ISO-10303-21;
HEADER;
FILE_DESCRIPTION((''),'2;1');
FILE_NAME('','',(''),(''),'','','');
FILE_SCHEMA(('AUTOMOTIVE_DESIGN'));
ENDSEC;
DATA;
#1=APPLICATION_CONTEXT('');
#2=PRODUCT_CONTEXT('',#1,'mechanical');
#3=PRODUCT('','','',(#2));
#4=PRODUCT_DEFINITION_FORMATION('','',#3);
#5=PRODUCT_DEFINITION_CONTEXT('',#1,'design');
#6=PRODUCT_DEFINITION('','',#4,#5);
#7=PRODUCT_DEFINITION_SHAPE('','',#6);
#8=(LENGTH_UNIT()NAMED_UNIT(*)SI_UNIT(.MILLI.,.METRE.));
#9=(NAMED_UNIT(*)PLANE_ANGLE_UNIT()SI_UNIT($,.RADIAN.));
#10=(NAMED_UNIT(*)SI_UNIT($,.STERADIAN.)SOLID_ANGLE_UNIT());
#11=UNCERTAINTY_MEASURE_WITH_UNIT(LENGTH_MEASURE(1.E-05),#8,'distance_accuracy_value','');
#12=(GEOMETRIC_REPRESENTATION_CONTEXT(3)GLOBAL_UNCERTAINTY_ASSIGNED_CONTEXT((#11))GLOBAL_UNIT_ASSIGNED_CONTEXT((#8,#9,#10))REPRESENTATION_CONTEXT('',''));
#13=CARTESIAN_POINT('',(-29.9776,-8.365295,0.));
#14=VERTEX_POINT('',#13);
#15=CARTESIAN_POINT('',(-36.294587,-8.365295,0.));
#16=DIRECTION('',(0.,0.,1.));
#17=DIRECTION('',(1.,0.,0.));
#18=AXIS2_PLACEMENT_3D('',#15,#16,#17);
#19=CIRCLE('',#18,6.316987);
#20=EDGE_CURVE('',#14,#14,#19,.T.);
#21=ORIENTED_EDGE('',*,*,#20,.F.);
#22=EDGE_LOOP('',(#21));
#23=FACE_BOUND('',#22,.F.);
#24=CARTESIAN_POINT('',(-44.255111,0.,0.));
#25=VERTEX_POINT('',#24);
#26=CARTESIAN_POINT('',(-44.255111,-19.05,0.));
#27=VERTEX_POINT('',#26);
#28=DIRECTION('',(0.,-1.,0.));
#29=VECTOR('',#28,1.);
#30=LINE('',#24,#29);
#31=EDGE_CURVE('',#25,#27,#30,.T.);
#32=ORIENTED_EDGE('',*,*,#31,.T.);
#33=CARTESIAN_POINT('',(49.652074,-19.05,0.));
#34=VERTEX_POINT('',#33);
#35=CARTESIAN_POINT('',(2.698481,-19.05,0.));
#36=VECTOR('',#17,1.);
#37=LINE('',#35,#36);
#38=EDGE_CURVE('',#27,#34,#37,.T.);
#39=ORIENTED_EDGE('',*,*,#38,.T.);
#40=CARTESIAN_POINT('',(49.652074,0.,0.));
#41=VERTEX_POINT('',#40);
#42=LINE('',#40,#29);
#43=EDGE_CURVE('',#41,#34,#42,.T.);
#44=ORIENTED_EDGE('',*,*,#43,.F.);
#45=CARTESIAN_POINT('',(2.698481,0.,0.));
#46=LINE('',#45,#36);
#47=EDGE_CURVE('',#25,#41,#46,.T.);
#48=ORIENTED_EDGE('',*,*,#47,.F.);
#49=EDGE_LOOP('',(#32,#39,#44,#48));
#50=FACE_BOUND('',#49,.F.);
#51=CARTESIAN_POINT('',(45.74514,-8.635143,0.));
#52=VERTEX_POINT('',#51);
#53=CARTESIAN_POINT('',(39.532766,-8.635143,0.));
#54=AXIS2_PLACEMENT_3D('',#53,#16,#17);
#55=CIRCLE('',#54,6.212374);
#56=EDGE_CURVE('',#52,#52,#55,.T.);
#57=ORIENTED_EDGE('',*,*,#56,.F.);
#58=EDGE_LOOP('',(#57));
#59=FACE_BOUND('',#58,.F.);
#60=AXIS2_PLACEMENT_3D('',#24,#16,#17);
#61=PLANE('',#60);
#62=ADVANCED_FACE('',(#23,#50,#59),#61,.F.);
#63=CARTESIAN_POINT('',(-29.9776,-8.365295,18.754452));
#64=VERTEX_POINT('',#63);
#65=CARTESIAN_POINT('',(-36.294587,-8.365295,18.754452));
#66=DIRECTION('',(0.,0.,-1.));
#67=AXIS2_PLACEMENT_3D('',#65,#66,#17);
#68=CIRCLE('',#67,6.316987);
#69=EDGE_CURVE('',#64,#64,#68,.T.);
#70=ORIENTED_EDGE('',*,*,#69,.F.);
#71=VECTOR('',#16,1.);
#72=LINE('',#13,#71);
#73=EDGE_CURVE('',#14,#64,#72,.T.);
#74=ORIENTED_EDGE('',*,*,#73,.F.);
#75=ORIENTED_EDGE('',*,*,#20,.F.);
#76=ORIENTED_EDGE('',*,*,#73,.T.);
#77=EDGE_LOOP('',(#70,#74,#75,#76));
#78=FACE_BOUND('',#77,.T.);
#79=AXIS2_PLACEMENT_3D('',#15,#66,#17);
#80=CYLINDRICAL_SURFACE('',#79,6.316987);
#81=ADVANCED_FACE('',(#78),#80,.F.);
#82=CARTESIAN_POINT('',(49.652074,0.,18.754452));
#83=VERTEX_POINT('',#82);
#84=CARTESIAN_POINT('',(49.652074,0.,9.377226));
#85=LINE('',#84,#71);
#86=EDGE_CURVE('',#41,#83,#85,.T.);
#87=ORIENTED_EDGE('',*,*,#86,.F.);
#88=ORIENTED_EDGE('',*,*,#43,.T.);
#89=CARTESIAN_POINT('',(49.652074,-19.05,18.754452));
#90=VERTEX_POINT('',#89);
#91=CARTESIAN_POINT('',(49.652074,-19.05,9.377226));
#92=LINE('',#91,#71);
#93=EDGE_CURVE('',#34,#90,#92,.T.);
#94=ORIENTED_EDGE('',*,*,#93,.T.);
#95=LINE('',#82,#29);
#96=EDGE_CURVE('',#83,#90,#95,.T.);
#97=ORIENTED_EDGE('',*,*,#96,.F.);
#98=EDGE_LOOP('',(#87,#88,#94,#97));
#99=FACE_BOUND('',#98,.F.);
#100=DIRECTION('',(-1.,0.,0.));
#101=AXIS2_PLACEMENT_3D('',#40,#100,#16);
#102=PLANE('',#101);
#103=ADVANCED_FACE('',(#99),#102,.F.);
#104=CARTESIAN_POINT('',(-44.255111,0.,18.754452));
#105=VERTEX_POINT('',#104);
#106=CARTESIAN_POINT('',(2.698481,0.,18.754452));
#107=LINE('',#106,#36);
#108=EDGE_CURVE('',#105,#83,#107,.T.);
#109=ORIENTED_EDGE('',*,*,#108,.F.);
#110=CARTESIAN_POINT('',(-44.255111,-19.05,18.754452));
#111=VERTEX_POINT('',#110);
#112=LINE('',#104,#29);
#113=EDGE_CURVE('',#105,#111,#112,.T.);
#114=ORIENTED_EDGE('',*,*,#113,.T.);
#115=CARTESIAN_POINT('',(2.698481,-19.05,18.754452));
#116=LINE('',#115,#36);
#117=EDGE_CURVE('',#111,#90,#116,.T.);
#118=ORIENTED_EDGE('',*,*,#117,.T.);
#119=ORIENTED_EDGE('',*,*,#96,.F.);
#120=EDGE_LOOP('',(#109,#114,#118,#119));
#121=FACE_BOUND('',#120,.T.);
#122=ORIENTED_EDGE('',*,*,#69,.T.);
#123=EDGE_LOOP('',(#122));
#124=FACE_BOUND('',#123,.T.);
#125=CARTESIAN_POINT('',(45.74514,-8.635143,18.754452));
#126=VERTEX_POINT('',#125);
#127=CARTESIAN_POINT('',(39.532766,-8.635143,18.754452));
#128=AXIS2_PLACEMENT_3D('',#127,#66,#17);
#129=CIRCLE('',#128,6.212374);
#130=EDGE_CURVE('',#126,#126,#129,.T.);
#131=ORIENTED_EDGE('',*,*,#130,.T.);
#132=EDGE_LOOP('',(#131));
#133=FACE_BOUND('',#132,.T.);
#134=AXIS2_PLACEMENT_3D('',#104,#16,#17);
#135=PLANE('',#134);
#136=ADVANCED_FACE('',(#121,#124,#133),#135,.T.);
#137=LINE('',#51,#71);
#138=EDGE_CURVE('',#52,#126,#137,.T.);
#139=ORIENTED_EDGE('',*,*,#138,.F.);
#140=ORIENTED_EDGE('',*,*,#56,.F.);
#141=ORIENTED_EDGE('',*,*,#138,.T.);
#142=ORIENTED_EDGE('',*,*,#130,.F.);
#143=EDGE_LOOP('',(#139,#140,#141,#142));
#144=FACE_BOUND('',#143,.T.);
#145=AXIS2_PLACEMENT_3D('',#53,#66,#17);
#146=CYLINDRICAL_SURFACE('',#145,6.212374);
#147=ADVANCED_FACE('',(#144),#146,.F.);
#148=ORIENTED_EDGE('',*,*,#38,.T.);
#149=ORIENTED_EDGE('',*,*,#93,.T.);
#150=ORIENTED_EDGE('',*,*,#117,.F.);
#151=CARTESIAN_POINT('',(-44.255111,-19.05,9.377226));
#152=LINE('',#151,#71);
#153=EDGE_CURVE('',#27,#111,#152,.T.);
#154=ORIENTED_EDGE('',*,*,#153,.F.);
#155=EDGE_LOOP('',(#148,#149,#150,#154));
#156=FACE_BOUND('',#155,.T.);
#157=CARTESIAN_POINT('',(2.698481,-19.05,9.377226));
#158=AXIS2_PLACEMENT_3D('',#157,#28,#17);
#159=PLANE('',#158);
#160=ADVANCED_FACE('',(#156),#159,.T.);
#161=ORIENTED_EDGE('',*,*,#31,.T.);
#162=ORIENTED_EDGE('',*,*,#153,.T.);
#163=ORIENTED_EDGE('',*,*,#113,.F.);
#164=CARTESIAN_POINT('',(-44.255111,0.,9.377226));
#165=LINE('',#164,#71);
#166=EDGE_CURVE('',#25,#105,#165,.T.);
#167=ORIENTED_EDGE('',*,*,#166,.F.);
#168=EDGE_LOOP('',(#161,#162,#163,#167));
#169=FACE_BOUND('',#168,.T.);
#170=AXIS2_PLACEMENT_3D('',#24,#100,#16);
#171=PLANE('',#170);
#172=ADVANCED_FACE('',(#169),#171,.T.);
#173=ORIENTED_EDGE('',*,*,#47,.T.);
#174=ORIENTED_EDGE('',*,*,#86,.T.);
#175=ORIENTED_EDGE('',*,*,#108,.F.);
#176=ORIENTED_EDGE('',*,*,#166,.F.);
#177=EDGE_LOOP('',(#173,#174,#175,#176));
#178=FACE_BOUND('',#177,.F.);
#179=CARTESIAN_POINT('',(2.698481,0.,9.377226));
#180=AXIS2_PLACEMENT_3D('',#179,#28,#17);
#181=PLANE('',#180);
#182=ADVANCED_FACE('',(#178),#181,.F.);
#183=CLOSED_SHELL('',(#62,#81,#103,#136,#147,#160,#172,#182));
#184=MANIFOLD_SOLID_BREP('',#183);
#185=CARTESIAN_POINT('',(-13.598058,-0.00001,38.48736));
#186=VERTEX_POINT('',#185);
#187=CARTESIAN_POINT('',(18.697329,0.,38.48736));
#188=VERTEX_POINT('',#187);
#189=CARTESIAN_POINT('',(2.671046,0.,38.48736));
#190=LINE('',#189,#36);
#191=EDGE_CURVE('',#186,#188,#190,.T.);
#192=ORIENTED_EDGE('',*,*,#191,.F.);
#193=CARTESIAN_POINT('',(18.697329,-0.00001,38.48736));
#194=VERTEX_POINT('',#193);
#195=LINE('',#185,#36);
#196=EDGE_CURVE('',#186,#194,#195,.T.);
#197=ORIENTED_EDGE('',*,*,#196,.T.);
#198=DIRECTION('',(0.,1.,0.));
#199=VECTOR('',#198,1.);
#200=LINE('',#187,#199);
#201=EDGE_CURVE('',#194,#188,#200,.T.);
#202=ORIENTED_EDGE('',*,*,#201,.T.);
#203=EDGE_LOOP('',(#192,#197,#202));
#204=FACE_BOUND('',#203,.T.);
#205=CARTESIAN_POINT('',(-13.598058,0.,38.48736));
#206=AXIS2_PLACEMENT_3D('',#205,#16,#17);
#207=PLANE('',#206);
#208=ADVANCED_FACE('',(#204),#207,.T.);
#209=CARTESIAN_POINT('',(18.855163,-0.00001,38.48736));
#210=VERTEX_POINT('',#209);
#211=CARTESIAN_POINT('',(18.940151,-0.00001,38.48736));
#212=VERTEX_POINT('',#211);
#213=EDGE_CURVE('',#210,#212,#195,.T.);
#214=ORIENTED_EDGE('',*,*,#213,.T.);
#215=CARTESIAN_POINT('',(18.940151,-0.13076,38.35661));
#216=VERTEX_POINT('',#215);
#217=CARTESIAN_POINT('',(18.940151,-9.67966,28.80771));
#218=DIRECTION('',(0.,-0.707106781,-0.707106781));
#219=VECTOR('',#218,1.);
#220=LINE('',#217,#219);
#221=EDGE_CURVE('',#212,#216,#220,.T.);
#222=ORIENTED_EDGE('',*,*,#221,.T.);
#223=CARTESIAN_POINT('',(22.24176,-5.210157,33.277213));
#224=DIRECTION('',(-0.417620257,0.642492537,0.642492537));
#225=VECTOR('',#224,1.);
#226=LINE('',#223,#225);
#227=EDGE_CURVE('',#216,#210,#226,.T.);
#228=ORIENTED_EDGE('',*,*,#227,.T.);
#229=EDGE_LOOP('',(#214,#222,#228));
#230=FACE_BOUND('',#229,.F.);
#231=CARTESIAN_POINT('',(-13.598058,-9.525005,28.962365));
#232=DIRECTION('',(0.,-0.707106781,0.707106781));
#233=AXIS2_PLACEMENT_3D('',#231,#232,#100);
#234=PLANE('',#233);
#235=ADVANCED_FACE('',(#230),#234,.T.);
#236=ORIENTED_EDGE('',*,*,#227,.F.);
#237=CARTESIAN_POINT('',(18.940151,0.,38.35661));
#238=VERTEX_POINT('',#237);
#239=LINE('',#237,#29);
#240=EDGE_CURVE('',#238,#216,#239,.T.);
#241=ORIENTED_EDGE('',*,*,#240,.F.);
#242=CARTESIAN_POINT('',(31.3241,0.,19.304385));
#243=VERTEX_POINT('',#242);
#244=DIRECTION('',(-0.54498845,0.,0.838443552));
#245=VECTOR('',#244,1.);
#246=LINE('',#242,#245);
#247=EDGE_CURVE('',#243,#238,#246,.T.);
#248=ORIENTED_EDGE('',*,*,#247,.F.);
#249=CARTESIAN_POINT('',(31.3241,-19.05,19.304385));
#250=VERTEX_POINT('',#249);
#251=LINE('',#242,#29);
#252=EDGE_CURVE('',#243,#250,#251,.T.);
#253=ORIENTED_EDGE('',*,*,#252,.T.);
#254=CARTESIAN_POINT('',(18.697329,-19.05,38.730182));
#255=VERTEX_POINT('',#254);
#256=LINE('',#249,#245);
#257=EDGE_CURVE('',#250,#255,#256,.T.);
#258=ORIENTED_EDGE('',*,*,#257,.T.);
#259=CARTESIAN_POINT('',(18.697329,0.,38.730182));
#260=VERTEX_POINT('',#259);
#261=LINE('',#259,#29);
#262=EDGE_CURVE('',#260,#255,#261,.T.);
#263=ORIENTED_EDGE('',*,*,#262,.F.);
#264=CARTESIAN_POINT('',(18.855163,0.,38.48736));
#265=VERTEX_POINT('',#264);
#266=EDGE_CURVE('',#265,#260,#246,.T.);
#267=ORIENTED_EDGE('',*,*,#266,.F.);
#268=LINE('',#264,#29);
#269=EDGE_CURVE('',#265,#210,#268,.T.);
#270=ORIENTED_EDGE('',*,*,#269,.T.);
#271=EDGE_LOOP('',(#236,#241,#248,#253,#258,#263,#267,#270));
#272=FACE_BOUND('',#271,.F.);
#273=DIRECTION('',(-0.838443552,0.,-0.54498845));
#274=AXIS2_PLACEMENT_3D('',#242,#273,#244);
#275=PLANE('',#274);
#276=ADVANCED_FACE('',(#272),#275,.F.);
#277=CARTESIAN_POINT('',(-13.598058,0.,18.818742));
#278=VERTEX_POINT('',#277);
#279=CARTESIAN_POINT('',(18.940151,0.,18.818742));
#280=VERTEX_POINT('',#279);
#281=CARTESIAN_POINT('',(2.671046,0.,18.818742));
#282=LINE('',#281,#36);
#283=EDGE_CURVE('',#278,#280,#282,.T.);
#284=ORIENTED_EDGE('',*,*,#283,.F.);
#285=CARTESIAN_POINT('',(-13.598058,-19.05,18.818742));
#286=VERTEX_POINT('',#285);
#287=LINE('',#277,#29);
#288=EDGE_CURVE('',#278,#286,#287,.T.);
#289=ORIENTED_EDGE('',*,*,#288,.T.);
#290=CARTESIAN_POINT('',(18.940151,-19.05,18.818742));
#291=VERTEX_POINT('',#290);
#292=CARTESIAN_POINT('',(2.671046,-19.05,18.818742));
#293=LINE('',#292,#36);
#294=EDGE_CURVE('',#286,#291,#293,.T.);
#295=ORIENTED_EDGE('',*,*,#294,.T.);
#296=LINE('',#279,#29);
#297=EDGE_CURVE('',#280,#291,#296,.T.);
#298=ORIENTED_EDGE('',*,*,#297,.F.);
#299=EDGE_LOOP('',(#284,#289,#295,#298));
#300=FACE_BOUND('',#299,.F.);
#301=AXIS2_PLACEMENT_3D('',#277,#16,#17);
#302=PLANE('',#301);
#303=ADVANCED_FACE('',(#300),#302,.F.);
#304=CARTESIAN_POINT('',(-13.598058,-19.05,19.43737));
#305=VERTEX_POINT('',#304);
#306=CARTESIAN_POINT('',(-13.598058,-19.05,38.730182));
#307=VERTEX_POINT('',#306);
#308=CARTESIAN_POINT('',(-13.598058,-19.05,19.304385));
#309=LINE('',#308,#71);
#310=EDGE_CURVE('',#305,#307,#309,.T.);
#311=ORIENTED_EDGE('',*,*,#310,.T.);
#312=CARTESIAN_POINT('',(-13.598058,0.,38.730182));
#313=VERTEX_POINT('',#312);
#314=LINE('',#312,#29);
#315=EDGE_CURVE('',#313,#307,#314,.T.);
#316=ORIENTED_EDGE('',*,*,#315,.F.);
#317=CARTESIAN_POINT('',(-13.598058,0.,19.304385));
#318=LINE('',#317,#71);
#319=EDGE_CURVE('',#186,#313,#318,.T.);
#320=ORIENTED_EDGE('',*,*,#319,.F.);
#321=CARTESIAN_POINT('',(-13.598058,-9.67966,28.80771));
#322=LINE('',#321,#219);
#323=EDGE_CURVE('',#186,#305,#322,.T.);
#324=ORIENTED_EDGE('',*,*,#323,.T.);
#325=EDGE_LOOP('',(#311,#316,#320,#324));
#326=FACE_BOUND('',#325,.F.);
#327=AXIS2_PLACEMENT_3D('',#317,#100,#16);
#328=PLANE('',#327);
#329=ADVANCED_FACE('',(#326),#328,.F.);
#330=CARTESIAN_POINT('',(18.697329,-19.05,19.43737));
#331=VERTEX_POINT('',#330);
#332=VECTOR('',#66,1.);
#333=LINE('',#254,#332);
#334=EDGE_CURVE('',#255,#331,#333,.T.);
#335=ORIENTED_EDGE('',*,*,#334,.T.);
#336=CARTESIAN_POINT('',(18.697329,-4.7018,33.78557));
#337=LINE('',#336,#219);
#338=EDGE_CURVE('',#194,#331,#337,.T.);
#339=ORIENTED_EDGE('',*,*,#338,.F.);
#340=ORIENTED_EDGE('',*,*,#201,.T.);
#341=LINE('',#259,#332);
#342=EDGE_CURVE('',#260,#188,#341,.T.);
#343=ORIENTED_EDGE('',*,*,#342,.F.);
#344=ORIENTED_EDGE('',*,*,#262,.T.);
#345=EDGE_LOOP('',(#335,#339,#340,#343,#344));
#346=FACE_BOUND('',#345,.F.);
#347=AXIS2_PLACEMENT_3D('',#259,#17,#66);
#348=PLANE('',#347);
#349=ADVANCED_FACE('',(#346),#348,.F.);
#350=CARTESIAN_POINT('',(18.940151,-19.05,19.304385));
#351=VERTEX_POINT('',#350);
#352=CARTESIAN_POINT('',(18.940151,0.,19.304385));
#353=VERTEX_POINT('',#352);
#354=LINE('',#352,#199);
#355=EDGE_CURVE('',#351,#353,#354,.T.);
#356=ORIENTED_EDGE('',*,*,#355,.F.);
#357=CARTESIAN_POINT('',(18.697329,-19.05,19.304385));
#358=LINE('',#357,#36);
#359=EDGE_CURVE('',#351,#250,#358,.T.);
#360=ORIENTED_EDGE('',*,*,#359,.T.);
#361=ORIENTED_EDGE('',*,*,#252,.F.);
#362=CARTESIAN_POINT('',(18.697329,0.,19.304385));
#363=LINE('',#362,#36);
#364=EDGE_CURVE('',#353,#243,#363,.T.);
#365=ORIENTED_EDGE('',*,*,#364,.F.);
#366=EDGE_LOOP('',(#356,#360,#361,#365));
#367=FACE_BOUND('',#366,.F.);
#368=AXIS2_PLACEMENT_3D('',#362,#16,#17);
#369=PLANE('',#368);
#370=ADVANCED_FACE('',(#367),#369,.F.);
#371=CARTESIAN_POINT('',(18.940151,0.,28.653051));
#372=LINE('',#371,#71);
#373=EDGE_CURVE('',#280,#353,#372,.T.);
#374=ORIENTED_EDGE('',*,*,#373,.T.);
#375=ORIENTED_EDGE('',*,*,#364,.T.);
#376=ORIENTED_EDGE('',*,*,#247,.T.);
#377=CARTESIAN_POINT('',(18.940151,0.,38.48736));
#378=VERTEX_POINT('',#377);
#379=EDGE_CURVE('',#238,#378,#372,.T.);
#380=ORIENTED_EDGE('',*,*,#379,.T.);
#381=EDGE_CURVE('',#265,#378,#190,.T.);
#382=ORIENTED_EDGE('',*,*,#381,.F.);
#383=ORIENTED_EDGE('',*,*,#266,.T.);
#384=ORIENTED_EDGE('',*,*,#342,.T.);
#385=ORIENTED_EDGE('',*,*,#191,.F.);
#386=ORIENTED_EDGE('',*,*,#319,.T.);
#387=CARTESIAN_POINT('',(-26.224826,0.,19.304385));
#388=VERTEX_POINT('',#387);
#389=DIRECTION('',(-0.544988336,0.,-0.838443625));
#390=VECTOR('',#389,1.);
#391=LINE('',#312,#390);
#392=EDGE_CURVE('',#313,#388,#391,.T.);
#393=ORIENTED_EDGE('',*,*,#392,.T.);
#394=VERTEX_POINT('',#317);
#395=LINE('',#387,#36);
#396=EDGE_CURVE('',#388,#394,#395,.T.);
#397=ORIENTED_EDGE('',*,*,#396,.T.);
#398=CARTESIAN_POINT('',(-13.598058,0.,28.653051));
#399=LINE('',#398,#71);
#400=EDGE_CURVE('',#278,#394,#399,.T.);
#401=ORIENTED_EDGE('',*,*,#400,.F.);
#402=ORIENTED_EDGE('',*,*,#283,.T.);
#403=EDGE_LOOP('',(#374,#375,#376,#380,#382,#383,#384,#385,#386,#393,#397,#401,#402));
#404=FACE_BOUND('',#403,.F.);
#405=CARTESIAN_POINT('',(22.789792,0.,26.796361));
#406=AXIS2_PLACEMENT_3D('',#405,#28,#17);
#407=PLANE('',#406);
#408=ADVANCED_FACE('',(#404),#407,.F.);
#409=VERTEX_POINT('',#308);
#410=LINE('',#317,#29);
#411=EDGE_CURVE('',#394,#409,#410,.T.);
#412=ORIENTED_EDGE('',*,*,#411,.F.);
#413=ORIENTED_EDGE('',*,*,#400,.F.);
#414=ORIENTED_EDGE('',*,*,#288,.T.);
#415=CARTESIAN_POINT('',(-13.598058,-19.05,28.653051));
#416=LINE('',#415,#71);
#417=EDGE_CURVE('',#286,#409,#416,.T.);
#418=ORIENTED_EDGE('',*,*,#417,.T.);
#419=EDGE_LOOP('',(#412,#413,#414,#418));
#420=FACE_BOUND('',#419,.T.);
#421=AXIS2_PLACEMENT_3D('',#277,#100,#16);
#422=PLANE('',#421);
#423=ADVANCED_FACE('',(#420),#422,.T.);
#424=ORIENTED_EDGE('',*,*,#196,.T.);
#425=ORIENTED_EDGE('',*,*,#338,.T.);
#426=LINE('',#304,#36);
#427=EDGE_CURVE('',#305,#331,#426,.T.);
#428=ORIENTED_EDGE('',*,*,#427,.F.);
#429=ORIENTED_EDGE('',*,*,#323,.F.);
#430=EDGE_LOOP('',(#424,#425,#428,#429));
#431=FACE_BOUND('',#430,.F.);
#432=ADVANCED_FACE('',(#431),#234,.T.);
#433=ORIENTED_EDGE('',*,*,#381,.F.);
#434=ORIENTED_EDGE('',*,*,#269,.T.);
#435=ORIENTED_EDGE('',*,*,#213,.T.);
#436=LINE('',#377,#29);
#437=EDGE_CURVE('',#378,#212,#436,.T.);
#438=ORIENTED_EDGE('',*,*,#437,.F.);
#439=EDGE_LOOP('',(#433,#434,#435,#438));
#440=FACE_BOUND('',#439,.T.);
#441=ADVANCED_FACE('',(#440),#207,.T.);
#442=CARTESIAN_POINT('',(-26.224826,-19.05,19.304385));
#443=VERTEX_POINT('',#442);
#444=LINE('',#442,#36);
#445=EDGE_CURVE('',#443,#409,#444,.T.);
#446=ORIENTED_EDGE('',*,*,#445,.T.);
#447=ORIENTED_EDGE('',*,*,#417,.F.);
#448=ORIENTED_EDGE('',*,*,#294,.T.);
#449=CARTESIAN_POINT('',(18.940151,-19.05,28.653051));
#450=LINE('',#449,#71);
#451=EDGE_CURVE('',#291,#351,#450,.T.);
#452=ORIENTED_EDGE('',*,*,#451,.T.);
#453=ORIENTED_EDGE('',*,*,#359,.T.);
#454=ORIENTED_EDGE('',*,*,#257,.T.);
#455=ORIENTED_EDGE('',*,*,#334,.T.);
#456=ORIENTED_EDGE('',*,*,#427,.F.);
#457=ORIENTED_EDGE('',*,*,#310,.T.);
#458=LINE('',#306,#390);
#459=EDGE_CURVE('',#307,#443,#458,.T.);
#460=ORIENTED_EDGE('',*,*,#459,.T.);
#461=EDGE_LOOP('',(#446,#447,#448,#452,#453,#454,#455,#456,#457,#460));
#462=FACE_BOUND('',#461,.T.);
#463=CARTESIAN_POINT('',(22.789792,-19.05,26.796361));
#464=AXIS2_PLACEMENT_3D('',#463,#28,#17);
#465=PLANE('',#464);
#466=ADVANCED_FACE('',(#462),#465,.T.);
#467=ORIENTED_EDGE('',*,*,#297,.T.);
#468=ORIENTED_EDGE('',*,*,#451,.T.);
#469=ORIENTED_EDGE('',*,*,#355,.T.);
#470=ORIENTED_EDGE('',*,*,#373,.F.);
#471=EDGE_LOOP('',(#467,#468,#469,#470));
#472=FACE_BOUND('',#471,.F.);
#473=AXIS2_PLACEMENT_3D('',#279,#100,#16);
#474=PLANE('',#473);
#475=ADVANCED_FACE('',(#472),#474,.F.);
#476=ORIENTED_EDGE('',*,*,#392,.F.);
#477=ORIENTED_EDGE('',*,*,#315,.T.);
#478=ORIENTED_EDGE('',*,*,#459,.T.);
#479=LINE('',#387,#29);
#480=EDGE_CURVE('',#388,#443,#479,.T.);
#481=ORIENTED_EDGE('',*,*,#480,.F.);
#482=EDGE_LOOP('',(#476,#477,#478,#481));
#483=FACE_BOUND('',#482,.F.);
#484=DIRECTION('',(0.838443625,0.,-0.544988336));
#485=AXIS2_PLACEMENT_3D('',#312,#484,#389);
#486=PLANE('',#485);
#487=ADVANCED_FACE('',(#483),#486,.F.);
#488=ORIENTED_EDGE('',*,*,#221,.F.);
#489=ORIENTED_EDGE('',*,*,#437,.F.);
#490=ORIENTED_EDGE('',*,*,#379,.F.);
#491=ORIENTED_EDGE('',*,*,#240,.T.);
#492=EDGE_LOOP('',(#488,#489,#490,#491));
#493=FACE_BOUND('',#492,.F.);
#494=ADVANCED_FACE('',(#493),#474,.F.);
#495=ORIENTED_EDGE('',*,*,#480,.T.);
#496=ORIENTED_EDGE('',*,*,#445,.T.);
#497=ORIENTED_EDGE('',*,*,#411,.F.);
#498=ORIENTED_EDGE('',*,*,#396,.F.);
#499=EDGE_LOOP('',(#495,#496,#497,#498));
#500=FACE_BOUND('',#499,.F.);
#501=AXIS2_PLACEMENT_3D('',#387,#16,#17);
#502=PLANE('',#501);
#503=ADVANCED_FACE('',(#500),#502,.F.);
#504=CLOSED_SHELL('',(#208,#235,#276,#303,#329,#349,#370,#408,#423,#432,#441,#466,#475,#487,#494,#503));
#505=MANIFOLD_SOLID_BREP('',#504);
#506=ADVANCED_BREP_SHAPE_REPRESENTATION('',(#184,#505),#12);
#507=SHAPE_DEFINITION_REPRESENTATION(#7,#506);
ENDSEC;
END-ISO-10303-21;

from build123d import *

# Parameters (mm, degrees)
F0_W     = 93.9071848989
F0_H     = 18.754452467
F1_DEPTH = 19.05
F2_R     = 6.2123744746
F2_R_2   = 6.3169870481
F3_DEPTH = 25.4
F4_W     = 32.5382091105
F4_H     = 19.6686182171
F5_DEPTH = 19.05
F6_SIZE  = 19.04999
F8_DEPTH = 19.05


# Not quite as in the source:
# - a fillet or chamfer is up to 0.001 mm smaller than in the source, because OpenCascade refuses the exact size


with BuildPart() as f1:
    # F0 (on Front) → F1 (new body)
    with BuildSketch(Plane.XZ):
        with Locations((2.6984810829, 9.3772262335)):
            Rectangle(F0_W, F0_H)
    extrude(amount=F1_DEPTH)

    # F2 (on Top) → F3 (cut)
    with BuildSketch(Plane.XY):
        with Locations((39.5327657461, -8.6351428181)):
            Circle(F2_R)
        with Locations((-36.2945869565, -8.3652948961)):
            Circle(F2_R_2)
    extrude(amount=F3_DEPTH, mode=Mode.SUBTRACT)


with BuildPart() as f5:
    # F4 (on Front) → F5 (new body)
    with BuildSketch(Plane.XZ):
        with Locations((2.6710461825, 28.6530507728)):
            Rectangle(F4_W, F4_H)
    extrude(amount=F5_DEPTH)

    # F6 (size 19.05 in the source; OpenCascade refuses exactly that, so slightly less here)
    f6_edges = [f5.edges().sort_by_distance(p)[0] for p in [
        (2.671046, -19.05, 38.48736),
    ]]
    chamfer(f6_edges, length=F6_SIZE)

    # F7 (on Front) → F8 (join)
    with BuildSketch(Plane.XZ):
        Polygon((31.3240997493, 19.3043854088), (18.6973288655, 38.7301817536), (18.6973288655, 19.3043854088), align=None)
        Polygon((-13.5980583727, 19.3043854088), (-13.5980583727, 38.7301817536), (-26.2248255312, 19.3043854088), align=None)
    extrude(amount=F8_DEPTH)


solid = Compound([f1.part, f5.part])
